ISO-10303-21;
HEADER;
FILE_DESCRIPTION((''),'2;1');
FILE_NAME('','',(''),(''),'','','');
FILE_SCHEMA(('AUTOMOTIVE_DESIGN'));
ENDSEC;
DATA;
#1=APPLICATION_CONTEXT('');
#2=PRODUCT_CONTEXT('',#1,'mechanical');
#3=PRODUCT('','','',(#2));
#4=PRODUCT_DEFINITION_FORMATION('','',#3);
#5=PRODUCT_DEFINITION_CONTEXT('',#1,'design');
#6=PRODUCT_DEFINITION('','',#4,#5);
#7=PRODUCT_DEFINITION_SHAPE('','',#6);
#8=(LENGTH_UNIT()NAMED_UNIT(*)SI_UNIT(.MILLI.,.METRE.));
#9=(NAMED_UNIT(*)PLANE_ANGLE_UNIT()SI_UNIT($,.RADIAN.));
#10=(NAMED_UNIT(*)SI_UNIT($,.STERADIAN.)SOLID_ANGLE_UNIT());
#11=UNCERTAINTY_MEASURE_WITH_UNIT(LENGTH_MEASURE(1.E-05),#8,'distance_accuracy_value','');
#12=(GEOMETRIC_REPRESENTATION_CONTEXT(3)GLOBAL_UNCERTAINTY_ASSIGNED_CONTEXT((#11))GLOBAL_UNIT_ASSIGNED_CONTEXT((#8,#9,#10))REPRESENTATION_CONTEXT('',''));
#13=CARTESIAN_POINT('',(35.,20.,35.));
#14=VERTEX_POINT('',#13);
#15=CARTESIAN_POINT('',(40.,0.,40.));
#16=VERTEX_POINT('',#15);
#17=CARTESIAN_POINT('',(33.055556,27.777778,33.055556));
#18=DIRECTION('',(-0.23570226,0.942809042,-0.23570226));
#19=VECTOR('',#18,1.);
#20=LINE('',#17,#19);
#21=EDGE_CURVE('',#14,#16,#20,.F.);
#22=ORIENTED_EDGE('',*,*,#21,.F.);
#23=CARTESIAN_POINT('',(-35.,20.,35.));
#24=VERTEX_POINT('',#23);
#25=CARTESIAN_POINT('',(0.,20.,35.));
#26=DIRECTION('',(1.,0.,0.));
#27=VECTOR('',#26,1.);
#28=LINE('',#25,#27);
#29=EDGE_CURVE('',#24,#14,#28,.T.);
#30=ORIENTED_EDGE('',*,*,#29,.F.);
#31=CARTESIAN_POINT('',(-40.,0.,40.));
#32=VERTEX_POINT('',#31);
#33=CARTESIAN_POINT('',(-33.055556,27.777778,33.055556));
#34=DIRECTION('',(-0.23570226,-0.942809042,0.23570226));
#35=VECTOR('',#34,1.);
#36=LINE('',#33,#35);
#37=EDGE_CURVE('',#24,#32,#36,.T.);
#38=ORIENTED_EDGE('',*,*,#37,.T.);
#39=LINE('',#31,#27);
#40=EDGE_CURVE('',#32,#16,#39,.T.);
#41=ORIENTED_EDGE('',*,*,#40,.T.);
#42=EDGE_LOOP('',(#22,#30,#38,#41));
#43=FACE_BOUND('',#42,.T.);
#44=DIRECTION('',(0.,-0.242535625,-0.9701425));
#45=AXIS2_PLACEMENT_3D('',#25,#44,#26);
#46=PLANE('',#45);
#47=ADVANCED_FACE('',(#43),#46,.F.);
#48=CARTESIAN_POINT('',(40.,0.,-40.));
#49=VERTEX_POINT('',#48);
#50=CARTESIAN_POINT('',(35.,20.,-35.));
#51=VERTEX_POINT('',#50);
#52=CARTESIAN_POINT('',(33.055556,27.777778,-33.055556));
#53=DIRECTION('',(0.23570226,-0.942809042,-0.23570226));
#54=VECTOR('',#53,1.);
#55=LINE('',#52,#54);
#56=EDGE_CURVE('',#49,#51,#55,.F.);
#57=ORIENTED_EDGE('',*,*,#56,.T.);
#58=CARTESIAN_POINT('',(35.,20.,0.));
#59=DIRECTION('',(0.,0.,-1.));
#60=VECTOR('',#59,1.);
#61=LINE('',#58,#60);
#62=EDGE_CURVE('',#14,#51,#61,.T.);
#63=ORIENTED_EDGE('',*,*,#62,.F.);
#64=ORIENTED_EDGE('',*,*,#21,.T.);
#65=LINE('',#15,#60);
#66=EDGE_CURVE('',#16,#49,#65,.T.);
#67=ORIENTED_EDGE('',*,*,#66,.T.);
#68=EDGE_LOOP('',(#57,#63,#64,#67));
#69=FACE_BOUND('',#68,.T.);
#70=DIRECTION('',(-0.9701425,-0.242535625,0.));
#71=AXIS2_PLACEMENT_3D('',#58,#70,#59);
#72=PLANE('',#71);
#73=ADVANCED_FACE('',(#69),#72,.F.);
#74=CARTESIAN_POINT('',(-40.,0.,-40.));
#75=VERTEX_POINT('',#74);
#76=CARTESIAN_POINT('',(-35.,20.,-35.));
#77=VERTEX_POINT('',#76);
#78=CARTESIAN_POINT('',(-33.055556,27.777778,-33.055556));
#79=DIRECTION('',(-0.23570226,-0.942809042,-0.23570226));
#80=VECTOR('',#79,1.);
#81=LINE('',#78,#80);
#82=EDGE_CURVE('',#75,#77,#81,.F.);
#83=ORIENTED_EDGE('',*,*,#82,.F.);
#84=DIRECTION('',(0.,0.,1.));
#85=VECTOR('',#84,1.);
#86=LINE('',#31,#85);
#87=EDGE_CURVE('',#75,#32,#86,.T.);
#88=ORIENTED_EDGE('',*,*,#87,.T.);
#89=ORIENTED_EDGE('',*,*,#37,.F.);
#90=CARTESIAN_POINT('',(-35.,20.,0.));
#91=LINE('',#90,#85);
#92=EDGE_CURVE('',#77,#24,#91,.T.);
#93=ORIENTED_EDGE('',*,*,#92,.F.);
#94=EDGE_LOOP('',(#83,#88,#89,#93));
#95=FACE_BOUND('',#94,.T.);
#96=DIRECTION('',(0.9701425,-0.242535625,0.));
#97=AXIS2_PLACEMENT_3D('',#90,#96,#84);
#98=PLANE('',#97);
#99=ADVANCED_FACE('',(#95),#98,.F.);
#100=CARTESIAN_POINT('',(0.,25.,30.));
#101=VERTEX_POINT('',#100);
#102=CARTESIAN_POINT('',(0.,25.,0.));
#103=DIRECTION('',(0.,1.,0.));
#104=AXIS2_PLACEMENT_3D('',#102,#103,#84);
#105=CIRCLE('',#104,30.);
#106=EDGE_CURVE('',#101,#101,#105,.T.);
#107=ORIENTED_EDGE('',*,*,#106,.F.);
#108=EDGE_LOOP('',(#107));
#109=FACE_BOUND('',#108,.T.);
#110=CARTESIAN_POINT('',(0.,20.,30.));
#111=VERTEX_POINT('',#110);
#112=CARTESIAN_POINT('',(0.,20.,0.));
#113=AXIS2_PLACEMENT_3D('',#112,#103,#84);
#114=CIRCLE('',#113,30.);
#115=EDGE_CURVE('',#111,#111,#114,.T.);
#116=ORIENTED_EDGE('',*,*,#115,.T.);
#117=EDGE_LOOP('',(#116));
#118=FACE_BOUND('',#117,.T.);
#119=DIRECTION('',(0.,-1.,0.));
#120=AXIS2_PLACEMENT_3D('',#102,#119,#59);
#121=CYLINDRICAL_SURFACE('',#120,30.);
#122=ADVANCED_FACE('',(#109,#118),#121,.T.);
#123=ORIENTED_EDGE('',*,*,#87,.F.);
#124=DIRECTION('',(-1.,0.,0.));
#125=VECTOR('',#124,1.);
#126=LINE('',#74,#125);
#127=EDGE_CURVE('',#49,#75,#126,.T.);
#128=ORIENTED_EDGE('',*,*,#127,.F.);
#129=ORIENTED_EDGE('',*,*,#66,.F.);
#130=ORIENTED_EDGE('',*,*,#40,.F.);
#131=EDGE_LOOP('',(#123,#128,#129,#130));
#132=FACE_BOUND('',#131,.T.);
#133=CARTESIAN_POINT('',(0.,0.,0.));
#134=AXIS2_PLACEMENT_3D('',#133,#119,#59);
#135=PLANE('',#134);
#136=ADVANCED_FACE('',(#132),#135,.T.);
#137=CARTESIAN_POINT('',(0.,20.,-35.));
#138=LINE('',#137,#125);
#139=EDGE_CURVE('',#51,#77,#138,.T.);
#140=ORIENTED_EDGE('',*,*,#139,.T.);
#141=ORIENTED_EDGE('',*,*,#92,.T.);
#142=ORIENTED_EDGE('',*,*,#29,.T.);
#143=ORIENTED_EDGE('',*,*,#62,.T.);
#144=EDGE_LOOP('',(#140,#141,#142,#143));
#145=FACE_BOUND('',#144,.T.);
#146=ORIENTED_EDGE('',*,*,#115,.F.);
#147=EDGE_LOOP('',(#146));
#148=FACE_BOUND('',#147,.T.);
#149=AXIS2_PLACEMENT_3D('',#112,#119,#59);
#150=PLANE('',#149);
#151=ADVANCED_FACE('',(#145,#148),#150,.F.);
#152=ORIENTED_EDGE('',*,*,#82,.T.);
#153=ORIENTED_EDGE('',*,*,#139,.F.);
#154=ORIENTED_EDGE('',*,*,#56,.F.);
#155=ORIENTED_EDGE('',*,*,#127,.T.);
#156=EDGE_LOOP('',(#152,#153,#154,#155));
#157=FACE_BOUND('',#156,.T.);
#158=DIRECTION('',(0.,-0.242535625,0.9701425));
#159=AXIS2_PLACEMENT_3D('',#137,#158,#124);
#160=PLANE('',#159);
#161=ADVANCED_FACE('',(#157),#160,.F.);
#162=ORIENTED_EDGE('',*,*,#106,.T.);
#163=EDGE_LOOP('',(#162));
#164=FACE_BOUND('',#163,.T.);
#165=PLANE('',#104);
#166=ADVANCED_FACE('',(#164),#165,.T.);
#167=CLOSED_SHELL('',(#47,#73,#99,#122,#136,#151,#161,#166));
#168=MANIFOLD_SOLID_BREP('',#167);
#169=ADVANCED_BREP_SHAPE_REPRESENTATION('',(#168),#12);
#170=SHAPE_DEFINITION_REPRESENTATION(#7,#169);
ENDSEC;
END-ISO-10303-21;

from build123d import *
from OCP.BRepFilletAPI import BRepFilletAPI_MakeChamfer

# Parameters (mm, degrees)
SKETCH_1_W       = 80
SKETCH_1_H       = 80
EXTRUDE_1_DEPTH  = 20
SKETCH_2_R       = 30
EXTRUDE_2_DEPTH  = 5
CHAMFER_1_SIZE   = 20
CHAMFER_1_SIZE_2 = 5


with BuildPart() as part:
    # Эскиз1 → Бобышка-Вытянуть1 (new body)
    with BuildSketch(Plane(origin=(0, 0, 0), x_dir=(1, 0, 0), z_dir=(0, 1, 0))):
        Rectangle(SKETCH_1_W, SKETCH_1_H)
    extrude(amount=EXTRUDE_1_DEPTH)

    # Эскиз2 → Бобышка-Вытянуть2 (add)
    with BuildSketch(Plane(origin=(0, 20, 0), x_dir=(1, 0, 0), z_dir=(0, 1, 0))):
        with Locations(Location((0, 0, 0), (0, 0, 270))):
            Circle(SKETCH_2_R)
    extrude(amount=EXTRUDE_2_DEPTH)

    # Фаска1
    chamfer_1_edges_1 = [part.edges().sort_by_distance(p)[0] for p in [
        (40, 20, 0),
    ]]
    chamfer_1_side_1 = [part.faces().sort_by_distance(p)[0] for p in [
        (40, 19.9, 0),
    ]]
    chamfer_1_edges_2 = [part.edges().sort_by_distance(p)[0] for p in [
        (0, 20, -40),
    ]]
    chamfer_1_side_2 = [part.faces().sort_by_distance(p)[0] for p in [
        (0, 20, -39.9),
    ]]
    chamfer_1_edges_3 = [part.edges().sort_by_distance(p)[0] for p in [
        (-40, 20, 0),
    ]]
    chamfer_1_side_3 = [part.faces().sort_by_distance(p)[0] for p in [
        (-40, 19.9, 0),
    ]]
    chamfer_1_edges_4 = [part.edges().sort_by_distance(p)[0] for p in [
        (0, 20, 40),
    ]]
    chamfer_1_side_4 = [part.faces().sort_by_distance(p)[0] for p in [
        (0, 19.9, 40),
    ]]
    chamfer_1 = BRepFilletAPI_MakeChamfer(part.part.solid().wrapped)
    for e in chamfer_1_edges_1:
        chamfer_1.Add(CHAMFER_1_SIZE - 0.0001, CHAMFER_1_SIZE_2 - 0.0001, e.wrapped, chamfer_1_side_1[0].wrapped)
    for e in chamfer_1_edges_2:
        chamfer_1.Add(CHAMFER_1_SIZE_2 - 0.0001, CHAMFER_1_SIZE - 0.0001, e.wrapped, chamfer_1_side_2[0].wrapped)
    for e in chamfer_1_edges_3:
        chamfer_1.Add(CHAMFER_1_SIZE - 0.0001, CHAMFER_1_SIZE_2 - 0.0001, e.wrapped, chamfer_1_side_3[0].wrapped)
    for e in chamfer_1_edges_4:
        chamfer_1.Add(CHAMFER_1_SIZE - 0.0001, CHAMFER_1_SIZE_2 - 0.0001, e.wrapped, chamfer_1_side_4[0].wrapped)
    add(Compound.cast(chamfer_1.Shape()), mode=Mode.REPLACE)  # a hair under: the kernel refuses the full size


solid = part.part
